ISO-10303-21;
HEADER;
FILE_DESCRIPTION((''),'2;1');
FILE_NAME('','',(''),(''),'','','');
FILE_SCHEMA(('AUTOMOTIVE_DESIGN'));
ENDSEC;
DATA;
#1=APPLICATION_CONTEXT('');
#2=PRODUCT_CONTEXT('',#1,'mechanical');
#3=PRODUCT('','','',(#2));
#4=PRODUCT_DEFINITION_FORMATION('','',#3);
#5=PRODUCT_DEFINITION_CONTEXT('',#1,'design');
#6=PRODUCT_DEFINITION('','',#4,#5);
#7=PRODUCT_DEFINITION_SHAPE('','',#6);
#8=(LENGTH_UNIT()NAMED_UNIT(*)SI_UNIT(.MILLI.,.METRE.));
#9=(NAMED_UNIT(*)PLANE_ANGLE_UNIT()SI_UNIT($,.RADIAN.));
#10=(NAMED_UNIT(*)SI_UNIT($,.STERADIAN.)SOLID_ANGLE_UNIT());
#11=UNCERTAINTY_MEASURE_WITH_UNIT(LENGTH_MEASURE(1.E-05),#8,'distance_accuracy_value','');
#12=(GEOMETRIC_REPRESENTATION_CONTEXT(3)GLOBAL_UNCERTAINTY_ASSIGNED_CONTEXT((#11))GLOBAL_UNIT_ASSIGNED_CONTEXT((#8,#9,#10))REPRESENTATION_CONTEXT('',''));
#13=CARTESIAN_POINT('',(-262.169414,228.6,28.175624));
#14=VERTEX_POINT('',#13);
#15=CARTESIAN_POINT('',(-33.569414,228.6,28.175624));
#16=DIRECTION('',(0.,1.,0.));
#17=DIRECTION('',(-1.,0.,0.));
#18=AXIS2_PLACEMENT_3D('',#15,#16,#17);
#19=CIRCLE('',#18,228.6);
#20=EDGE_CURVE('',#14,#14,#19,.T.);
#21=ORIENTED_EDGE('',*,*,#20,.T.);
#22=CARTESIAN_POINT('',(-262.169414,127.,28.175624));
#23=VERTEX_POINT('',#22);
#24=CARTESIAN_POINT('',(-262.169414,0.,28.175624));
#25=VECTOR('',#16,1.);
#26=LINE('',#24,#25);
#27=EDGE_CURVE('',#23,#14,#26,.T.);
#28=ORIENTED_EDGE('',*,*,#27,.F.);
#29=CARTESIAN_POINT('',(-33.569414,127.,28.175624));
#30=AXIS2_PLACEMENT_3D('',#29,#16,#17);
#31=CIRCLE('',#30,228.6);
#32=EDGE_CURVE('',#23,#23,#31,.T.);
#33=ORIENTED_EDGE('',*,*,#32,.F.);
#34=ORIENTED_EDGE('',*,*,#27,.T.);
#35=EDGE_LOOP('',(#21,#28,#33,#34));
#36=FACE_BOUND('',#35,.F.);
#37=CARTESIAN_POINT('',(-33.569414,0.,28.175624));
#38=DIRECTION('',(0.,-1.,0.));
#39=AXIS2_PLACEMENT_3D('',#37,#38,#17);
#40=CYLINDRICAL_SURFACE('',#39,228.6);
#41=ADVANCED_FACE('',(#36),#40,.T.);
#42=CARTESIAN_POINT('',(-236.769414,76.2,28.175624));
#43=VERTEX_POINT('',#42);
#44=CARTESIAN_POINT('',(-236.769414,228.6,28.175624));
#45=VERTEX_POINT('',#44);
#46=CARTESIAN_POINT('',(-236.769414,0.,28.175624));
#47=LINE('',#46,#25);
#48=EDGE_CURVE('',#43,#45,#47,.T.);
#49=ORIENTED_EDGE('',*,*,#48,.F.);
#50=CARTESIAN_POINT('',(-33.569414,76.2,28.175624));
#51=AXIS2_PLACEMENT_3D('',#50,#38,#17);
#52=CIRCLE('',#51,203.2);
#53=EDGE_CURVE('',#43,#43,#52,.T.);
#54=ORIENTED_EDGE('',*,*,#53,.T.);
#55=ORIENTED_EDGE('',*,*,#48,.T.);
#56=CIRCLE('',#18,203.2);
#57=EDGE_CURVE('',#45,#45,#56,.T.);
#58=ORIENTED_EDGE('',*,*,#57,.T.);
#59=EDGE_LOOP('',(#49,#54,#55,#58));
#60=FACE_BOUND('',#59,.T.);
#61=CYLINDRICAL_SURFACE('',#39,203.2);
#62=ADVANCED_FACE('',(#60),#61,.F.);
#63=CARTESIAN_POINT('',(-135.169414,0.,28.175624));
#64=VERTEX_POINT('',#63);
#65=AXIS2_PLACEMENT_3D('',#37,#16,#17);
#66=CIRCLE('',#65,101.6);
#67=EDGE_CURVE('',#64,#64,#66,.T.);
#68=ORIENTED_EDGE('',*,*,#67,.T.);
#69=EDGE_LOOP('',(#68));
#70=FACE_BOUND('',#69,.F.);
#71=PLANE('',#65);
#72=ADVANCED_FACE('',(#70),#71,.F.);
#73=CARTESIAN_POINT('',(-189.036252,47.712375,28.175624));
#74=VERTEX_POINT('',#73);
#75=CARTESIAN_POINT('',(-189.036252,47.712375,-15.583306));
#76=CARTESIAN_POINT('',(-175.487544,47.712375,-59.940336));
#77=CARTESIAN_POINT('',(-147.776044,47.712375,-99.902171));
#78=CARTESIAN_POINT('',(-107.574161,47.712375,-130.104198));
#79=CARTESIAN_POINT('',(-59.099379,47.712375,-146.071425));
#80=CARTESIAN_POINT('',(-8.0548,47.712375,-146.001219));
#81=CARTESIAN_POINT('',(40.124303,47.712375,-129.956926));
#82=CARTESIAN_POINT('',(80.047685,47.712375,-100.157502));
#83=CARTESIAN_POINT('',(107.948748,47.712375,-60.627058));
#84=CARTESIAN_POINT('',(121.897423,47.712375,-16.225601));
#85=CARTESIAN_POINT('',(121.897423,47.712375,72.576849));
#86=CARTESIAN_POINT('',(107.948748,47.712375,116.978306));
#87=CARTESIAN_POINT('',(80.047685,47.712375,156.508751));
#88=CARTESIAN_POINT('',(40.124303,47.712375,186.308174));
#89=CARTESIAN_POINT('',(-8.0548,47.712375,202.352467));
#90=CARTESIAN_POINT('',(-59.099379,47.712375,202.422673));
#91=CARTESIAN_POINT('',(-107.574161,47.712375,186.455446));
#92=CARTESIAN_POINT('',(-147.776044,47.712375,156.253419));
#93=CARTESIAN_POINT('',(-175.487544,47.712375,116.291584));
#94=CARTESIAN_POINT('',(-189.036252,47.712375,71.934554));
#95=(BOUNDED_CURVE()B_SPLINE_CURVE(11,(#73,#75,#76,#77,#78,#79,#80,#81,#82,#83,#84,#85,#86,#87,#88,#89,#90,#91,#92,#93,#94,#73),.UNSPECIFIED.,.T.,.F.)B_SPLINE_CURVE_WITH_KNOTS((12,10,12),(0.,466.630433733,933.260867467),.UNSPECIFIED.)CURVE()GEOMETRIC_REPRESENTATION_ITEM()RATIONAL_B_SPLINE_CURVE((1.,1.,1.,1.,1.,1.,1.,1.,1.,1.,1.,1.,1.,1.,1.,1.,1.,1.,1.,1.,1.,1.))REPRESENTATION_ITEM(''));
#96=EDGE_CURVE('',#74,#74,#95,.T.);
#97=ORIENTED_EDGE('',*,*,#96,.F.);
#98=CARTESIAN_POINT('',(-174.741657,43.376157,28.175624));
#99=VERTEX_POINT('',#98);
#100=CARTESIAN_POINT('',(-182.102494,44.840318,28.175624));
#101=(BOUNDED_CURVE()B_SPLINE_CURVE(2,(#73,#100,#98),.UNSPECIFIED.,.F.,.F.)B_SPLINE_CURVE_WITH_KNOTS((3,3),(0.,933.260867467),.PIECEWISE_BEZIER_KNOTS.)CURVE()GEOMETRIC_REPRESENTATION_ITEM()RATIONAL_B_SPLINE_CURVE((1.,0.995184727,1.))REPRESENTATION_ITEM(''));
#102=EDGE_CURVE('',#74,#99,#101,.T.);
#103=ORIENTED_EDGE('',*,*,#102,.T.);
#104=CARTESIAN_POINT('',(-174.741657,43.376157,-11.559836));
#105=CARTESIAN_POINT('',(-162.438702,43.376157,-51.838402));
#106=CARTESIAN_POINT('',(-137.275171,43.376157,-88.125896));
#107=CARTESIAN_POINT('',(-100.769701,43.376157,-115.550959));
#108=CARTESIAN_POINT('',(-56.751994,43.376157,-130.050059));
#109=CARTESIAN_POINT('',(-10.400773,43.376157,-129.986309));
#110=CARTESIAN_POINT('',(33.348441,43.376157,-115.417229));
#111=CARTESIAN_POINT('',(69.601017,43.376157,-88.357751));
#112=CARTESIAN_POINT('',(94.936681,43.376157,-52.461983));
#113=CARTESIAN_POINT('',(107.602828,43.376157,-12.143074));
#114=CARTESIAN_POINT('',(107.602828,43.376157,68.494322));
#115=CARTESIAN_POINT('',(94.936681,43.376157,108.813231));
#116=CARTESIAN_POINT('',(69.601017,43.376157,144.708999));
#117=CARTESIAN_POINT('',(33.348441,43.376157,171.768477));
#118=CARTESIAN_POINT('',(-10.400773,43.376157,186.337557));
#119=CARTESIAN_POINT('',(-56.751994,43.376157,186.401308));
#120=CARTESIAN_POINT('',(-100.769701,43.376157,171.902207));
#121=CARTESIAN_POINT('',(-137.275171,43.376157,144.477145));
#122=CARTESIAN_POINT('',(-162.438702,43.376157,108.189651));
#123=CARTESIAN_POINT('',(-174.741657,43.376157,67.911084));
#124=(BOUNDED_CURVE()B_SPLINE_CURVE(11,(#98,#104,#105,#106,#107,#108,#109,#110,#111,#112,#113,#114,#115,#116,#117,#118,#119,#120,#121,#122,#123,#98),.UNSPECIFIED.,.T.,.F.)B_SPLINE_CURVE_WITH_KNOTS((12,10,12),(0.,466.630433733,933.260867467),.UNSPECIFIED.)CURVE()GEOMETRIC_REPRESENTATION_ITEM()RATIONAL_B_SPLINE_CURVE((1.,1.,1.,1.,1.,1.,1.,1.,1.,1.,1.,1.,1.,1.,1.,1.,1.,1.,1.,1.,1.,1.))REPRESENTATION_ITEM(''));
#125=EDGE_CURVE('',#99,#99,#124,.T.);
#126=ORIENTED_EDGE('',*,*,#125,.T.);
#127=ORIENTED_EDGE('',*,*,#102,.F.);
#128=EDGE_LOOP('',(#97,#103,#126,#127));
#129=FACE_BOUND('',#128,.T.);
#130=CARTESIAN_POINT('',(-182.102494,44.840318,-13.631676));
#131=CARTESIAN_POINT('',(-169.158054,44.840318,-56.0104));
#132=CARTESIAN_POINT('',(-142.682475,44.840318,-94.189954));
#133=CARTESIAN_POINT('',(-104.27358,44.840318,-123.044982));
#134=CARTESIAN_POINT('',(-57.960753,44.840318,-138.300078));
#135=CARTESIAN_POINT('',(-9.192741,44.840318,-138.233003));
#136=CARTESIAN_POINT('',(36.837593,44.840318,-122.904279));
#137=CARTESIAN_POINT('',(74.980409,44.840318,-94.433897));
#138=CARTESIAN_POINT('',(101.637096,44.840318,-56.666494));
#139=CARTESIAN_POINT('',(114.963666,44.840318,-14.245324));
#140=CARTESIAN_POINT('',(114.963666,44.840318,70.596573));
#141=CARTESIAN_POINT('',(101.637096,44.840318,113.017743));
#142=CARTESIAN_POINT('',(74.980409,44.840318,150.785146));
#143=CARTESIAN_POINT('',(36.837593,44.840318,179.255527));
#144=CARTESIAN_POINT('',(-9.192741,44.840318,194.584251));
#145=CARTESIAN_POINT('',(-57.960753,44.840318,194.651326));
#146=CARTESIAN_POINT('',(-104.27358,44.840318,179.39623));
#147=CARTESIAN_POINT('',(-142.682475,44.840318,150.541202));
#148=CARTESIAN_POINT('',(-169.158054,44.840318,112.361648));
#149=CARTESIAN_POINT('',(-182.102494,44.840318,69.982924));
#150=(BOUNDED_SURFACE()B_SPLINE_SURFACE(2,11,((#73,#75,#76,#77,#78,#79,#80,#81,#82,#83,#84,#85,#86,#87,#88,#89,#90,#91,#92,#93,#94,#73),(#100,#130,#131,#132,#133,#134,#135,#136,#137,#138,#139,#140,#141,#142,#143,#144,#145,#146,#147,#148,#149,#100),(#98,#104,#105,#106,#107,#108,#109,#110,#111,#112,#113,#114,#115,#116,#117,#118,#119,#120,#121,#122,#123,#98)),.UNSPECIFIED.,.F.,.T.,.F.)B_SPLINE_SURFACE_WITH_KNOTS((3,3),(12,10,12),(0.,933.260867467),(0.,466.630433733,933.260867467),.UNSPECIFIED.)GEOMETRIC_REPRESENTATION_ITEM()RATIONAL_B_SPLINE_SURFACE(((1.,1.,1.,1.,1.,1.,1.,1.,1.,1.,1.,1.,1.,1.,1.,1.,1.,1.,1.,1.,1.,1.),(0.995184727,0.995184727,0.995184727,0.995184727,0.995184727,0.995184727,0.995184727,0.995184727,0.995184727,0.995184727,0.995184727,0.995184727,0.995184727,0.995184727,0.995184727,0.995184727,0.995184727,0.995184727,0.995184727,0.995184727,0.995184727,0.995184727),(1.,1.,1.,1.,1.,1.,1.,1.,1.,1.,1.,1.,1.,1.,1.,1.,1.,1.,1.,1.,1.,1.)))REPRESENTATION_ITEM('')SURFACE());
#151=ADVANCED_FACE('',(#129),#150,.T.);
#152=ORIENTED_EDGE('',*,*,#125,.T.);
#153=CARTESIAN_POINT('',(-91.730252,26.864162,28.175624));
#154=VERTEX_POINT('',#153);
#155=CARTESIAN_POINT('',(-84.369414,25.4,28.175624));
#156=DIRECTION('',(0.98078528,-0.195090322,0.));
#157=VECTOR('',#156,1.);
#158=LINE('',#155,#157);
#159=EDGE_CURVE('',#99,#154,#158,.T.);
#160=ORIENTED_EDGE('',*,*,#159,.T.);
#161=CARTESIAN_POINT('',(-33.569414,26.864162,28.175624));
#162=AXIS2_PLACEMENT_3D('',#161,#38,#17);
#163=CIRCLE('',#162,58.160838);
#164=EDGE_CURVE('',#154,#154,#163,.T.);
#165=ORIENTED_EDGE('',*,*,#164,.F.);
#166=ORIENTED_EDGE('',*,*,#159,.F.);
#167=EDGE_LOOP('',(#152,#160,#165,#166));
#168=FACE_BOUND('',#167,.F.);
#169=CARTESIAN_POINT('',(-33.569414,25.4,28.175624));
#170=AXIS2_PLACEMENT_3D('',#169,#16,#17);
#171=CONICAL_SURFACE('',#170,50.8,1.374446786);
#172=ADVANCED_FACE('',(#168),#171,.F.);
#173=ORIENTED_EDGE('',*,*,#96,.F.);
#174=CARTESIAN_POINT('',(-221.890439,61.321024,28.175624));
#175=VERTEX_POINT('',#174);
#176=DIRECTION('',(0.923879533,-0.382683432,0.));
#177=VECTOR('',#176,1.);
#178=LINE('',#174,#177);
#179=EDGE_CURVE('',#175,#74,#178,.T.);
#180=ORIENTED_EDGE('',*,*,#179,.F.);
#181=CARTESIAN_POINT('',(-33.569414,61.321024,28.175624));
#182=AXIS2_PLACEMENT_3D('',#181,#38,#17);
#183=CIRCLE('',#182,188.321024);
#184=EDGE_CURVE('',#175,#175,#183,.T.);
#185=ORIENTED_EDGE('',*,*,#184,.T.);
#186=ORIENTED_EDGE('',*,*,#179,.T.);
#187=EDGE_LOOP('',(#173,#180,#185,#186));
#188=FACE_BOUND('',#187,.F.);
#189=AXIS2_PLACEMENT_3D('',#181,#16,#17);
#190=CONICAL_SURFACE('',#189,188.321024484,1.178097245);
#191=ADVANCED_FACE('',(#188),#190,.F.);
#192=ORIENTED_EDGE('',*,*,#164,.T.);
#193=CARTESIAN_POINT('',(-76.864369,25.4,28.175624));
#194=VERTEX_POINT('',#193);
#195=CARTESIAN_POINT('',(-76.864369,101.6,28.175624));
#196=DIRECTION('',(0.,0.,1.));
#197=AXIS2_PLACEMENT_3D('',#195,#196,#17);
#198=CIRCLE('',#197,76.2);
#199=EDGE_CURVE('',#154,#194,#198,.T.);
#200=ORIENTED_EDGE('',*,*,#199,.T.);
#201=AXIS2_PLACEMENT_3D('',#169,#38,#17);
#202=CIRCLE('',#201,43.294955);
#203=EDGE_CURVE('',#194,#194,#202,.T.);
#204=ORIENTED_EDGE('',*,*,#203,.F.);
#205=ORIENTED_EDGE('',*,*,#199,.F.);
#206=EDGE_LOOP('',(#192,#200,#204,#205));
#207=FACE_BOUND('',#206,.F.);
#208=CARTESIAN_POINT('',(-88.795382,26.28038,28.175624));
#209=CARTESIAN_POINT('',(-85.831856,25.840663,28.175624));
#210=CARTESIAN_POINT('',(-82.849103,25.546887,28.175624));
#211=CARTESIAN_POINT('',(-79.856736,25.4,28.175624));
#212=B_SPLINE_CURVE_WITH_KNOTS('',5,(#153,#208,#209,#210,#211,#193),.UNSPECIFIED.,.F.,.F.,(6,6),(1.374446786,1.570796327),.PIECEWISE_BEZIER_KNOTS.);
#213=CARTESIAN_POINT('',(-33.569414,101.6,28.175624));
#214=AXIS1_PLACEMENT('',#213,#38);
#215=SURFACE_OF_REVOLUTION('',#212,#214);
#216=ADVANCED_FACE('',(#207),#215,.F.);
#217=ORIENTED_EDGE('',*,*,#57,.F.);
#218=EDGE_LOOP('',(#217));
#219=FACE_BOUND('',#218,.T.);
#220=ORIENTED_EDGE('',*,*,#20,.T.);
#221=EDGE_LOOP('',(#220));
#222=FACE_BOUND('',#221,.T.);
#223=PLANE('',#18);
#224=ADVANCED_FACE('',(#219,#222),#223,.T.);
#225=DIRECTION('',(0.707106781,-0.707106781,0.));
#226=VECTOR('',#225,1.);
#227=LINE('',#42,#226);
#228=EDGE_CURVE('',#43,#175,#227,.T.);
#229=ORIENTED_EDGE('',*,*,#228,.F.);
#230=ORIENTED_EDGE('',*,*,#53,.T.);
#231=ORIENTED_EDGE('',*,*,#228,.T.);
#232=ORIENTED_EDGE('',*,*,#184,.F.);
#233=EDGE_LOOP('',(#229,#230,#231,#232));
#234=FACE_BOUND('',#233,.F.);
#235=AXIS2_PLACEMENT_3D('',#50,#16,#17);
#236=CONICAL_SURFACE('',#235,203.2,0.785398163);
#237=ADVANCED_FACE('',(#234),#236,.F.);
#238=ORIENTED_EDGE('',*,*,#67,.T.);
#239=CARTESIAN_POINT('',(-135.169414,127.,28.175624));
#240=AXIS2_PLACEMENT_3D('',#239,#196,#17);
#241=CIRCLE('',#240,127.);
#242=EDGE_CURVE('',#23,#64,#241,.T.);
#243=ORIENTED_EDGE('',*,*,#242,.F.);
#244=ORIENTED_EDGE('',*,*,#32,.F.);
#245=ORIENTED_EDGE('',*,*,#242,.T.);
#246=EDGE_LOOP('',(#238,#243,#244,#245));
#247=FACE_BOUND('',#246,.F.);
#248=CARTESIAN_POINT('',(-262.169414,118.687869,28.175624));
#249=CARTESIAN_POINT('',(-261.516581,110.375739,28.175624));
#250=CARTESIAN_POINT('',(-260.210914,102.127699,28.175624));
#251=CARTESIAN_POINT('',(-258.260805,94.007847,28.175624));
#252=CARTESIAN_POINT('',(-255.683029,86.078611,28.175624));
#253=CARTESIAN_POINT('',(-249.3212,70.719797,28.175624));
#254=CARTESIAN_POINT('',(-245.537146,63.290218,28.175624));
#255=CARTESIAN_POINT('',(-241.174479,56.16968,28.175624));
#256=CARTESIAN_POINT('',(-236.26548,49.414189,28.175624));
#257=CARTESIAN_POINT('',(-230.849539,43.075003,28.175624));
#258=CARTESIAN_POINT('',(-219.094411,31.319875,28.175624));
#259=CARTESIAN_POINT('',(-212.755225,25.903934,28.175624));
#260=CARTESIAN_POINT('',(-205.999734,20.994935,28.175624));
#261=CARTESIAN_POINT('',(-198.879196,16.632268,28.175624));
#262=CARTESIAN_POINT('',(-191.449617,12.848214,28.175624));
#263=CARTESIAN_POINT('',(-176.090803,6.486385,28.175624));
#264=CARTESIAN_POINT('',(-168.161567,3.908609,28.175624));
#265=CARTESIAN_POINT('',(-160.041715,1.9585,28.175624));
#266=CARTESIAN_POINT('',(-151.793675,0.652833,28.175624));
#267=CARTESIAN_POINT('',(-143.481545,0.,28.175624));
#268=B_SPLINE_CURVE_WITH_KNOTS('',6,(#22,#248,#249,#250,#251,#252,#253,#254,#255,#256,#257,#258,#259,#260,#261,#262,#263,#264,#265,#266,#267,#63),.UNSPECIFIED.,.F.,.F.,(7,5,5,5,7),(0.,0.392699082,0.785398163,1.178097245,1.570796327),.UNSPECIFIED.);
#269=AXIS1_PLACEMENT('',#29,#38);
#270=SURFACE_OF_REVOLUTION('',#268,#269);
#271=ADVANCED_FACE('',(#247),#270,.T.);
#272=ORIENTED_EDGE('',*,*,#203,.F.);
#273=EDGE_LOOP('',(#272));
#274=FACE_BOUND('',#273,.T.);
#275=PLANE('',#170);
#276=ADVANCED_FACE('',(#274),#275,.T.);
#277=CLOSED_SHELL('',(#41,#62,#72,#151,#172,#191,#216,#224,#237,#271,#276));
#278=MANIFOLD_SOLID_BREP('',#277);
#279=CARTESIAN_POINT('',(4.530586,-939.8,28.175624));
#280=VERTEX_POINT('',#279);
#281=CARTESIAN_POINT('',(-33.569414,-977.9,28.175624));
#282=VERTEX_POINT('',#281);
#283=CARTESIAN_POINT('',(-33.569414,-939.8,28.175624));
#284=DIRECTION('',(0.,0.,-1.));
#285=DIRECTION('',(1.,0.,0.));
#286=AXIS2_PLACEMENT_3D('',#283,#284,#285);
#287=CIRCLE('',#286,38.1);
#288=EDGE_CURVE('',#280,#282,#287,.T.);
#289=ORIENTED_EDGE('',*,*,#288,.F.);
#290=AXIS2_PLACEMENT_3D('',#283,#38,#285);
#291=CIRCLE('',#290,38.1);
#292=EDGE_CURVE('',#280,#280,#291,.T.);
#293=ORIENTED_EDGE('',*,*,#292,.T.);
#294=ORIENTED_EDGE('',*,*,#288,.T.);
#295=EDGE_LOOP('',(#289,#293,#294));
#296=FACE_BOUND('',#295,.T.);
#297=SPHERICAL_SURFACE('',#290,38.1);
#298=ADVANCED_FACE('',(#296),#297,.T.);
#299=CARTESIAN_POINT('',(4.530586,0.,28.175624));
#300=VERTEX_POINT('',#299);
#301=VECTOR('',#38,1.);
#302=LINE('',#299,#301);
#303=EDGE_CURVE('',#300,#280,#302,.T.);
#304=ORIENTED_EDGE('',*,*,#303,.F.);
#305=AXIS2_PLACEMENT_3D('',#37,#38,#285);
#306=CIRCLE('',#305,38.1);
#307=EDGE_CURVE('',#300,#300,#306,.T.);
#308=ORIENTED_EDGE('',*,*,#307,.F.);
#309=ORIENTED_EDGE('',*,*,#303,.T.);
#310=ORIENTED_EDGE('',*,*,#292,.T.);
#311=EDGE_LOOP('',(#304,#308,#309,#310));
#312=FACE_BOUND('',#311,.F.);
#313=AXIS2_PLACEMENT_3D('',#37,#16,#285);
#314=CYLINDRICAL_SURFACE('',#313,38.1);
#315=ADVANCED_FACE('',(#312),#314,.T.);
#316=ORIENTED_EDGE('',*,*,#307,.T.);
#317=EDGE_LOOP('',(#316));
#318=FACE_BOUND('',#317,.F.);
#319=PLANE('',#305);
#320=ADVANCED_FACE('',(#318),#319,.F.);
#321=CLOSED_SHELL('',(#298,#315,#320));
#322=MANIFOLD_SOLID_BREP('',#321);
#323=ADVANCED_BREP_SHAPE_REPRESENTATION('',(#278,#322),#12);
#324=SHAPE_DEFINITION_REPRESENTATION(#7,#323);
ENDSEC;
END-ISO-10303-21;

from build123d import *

# Parameters (mm, degrees)
F0_R     = 38.1
F1_DEPTH = 977.9
F2_R     = 38.1
F3_R     = 228.6
F4_DEPTH = 228.6
F5_T     = -25.4
F6_SIZE  = 50.8
F8_R     = 127
F9_SIZE  = 50.8
F10_R    = 76.2


# Not quite as in the source:
# - a fillet or chamfer that OpenCascade refuses, or shapes differently, is made with other operations: its cross-section is extruded or revolved along the edge and cut away or added


with BuildPart() as f1:
    # F0 (on Front) → F1 (new body)
    with BuildSketch(Plane.XZ):
        with Locations((-33.5694141686, 28.1756240875)):
            Circle(F0_R)
    extrude(amount=F1_DEPTH)

    # F2
    f2_edges = [f1.edges().sort_by_distance(p)[0] for p in [
        (-71.669414, -977.9, 28.175624),
    ]]
    fillet(f2_edges, radius=F2_R)


with BuildPart() as f4:
    # F3 (on face) → F4 (new body)
    with BuildSketch(Plane(origin=(0, 0, 0), x_dir=(-1, 0, 0), z_dir=(0, 1, 0))):
        with Locations((33.5694141686, 28.1756240875)):
            Circle(F3_R)
    extrude(amount=F4_DEPTH)

    # F5
    f5_openings = [f4.faces().sort_by_distance(p)[0] for p in [
        (-33.569414, 228.6, 28.175624),
    ]]
    offset(amount=F5_T, openings=f5_openings)

    # F6
    f6_edges = [f4.edges().sort_by_distance(p)[0] for p in [
        (169.630586, 25.4, 28.175624),
    ]]
    chamfer(f6_edges, length=F6_SIZE)

    # F7: chamfer of 50.8 on 3 edges, made by hand

    # F7_s1 → F7_t2 (revolve)
    with BuildSketch(Plane.XY.offset(28.1756240875)):
        Polygon((-221.8904386529, 61.3210244843), (-135.1694141686, 25.4), (-185.9694141686, 25.4), align=None)
    revolve(axis=Axis((-33.5694141686, 25.4, 28.1756240875), (0, -1, 0)))

    # F8
    f8_edges = [f4.edges().sort_by_distance(p)[0] for p in [
        (195.030586, 0, 28.175624),
    ]]
    fillet(f8_edges, radius=F8_R)

    # F9
    f9_edges = [f4.edges().sort_by_distance(p)[0] for p in [
        (68.030586, 25.4, 28.175624),
    ]]
    chamfer(f9_edges, length=F9_SIZE)

    # F10
    f10_edges = [f4.edges().sort_by_distance(p)[0] for p in [
        (-133.235954, 35.120159, 28.175624),
        (114.963666, 44.840318, 28.175624),
        (17.230586, 25.4, 28.175624),
    ]]
    fillet(f10_edges, radius=F10_R)


solid = Compound([f1.part, f4.part])
